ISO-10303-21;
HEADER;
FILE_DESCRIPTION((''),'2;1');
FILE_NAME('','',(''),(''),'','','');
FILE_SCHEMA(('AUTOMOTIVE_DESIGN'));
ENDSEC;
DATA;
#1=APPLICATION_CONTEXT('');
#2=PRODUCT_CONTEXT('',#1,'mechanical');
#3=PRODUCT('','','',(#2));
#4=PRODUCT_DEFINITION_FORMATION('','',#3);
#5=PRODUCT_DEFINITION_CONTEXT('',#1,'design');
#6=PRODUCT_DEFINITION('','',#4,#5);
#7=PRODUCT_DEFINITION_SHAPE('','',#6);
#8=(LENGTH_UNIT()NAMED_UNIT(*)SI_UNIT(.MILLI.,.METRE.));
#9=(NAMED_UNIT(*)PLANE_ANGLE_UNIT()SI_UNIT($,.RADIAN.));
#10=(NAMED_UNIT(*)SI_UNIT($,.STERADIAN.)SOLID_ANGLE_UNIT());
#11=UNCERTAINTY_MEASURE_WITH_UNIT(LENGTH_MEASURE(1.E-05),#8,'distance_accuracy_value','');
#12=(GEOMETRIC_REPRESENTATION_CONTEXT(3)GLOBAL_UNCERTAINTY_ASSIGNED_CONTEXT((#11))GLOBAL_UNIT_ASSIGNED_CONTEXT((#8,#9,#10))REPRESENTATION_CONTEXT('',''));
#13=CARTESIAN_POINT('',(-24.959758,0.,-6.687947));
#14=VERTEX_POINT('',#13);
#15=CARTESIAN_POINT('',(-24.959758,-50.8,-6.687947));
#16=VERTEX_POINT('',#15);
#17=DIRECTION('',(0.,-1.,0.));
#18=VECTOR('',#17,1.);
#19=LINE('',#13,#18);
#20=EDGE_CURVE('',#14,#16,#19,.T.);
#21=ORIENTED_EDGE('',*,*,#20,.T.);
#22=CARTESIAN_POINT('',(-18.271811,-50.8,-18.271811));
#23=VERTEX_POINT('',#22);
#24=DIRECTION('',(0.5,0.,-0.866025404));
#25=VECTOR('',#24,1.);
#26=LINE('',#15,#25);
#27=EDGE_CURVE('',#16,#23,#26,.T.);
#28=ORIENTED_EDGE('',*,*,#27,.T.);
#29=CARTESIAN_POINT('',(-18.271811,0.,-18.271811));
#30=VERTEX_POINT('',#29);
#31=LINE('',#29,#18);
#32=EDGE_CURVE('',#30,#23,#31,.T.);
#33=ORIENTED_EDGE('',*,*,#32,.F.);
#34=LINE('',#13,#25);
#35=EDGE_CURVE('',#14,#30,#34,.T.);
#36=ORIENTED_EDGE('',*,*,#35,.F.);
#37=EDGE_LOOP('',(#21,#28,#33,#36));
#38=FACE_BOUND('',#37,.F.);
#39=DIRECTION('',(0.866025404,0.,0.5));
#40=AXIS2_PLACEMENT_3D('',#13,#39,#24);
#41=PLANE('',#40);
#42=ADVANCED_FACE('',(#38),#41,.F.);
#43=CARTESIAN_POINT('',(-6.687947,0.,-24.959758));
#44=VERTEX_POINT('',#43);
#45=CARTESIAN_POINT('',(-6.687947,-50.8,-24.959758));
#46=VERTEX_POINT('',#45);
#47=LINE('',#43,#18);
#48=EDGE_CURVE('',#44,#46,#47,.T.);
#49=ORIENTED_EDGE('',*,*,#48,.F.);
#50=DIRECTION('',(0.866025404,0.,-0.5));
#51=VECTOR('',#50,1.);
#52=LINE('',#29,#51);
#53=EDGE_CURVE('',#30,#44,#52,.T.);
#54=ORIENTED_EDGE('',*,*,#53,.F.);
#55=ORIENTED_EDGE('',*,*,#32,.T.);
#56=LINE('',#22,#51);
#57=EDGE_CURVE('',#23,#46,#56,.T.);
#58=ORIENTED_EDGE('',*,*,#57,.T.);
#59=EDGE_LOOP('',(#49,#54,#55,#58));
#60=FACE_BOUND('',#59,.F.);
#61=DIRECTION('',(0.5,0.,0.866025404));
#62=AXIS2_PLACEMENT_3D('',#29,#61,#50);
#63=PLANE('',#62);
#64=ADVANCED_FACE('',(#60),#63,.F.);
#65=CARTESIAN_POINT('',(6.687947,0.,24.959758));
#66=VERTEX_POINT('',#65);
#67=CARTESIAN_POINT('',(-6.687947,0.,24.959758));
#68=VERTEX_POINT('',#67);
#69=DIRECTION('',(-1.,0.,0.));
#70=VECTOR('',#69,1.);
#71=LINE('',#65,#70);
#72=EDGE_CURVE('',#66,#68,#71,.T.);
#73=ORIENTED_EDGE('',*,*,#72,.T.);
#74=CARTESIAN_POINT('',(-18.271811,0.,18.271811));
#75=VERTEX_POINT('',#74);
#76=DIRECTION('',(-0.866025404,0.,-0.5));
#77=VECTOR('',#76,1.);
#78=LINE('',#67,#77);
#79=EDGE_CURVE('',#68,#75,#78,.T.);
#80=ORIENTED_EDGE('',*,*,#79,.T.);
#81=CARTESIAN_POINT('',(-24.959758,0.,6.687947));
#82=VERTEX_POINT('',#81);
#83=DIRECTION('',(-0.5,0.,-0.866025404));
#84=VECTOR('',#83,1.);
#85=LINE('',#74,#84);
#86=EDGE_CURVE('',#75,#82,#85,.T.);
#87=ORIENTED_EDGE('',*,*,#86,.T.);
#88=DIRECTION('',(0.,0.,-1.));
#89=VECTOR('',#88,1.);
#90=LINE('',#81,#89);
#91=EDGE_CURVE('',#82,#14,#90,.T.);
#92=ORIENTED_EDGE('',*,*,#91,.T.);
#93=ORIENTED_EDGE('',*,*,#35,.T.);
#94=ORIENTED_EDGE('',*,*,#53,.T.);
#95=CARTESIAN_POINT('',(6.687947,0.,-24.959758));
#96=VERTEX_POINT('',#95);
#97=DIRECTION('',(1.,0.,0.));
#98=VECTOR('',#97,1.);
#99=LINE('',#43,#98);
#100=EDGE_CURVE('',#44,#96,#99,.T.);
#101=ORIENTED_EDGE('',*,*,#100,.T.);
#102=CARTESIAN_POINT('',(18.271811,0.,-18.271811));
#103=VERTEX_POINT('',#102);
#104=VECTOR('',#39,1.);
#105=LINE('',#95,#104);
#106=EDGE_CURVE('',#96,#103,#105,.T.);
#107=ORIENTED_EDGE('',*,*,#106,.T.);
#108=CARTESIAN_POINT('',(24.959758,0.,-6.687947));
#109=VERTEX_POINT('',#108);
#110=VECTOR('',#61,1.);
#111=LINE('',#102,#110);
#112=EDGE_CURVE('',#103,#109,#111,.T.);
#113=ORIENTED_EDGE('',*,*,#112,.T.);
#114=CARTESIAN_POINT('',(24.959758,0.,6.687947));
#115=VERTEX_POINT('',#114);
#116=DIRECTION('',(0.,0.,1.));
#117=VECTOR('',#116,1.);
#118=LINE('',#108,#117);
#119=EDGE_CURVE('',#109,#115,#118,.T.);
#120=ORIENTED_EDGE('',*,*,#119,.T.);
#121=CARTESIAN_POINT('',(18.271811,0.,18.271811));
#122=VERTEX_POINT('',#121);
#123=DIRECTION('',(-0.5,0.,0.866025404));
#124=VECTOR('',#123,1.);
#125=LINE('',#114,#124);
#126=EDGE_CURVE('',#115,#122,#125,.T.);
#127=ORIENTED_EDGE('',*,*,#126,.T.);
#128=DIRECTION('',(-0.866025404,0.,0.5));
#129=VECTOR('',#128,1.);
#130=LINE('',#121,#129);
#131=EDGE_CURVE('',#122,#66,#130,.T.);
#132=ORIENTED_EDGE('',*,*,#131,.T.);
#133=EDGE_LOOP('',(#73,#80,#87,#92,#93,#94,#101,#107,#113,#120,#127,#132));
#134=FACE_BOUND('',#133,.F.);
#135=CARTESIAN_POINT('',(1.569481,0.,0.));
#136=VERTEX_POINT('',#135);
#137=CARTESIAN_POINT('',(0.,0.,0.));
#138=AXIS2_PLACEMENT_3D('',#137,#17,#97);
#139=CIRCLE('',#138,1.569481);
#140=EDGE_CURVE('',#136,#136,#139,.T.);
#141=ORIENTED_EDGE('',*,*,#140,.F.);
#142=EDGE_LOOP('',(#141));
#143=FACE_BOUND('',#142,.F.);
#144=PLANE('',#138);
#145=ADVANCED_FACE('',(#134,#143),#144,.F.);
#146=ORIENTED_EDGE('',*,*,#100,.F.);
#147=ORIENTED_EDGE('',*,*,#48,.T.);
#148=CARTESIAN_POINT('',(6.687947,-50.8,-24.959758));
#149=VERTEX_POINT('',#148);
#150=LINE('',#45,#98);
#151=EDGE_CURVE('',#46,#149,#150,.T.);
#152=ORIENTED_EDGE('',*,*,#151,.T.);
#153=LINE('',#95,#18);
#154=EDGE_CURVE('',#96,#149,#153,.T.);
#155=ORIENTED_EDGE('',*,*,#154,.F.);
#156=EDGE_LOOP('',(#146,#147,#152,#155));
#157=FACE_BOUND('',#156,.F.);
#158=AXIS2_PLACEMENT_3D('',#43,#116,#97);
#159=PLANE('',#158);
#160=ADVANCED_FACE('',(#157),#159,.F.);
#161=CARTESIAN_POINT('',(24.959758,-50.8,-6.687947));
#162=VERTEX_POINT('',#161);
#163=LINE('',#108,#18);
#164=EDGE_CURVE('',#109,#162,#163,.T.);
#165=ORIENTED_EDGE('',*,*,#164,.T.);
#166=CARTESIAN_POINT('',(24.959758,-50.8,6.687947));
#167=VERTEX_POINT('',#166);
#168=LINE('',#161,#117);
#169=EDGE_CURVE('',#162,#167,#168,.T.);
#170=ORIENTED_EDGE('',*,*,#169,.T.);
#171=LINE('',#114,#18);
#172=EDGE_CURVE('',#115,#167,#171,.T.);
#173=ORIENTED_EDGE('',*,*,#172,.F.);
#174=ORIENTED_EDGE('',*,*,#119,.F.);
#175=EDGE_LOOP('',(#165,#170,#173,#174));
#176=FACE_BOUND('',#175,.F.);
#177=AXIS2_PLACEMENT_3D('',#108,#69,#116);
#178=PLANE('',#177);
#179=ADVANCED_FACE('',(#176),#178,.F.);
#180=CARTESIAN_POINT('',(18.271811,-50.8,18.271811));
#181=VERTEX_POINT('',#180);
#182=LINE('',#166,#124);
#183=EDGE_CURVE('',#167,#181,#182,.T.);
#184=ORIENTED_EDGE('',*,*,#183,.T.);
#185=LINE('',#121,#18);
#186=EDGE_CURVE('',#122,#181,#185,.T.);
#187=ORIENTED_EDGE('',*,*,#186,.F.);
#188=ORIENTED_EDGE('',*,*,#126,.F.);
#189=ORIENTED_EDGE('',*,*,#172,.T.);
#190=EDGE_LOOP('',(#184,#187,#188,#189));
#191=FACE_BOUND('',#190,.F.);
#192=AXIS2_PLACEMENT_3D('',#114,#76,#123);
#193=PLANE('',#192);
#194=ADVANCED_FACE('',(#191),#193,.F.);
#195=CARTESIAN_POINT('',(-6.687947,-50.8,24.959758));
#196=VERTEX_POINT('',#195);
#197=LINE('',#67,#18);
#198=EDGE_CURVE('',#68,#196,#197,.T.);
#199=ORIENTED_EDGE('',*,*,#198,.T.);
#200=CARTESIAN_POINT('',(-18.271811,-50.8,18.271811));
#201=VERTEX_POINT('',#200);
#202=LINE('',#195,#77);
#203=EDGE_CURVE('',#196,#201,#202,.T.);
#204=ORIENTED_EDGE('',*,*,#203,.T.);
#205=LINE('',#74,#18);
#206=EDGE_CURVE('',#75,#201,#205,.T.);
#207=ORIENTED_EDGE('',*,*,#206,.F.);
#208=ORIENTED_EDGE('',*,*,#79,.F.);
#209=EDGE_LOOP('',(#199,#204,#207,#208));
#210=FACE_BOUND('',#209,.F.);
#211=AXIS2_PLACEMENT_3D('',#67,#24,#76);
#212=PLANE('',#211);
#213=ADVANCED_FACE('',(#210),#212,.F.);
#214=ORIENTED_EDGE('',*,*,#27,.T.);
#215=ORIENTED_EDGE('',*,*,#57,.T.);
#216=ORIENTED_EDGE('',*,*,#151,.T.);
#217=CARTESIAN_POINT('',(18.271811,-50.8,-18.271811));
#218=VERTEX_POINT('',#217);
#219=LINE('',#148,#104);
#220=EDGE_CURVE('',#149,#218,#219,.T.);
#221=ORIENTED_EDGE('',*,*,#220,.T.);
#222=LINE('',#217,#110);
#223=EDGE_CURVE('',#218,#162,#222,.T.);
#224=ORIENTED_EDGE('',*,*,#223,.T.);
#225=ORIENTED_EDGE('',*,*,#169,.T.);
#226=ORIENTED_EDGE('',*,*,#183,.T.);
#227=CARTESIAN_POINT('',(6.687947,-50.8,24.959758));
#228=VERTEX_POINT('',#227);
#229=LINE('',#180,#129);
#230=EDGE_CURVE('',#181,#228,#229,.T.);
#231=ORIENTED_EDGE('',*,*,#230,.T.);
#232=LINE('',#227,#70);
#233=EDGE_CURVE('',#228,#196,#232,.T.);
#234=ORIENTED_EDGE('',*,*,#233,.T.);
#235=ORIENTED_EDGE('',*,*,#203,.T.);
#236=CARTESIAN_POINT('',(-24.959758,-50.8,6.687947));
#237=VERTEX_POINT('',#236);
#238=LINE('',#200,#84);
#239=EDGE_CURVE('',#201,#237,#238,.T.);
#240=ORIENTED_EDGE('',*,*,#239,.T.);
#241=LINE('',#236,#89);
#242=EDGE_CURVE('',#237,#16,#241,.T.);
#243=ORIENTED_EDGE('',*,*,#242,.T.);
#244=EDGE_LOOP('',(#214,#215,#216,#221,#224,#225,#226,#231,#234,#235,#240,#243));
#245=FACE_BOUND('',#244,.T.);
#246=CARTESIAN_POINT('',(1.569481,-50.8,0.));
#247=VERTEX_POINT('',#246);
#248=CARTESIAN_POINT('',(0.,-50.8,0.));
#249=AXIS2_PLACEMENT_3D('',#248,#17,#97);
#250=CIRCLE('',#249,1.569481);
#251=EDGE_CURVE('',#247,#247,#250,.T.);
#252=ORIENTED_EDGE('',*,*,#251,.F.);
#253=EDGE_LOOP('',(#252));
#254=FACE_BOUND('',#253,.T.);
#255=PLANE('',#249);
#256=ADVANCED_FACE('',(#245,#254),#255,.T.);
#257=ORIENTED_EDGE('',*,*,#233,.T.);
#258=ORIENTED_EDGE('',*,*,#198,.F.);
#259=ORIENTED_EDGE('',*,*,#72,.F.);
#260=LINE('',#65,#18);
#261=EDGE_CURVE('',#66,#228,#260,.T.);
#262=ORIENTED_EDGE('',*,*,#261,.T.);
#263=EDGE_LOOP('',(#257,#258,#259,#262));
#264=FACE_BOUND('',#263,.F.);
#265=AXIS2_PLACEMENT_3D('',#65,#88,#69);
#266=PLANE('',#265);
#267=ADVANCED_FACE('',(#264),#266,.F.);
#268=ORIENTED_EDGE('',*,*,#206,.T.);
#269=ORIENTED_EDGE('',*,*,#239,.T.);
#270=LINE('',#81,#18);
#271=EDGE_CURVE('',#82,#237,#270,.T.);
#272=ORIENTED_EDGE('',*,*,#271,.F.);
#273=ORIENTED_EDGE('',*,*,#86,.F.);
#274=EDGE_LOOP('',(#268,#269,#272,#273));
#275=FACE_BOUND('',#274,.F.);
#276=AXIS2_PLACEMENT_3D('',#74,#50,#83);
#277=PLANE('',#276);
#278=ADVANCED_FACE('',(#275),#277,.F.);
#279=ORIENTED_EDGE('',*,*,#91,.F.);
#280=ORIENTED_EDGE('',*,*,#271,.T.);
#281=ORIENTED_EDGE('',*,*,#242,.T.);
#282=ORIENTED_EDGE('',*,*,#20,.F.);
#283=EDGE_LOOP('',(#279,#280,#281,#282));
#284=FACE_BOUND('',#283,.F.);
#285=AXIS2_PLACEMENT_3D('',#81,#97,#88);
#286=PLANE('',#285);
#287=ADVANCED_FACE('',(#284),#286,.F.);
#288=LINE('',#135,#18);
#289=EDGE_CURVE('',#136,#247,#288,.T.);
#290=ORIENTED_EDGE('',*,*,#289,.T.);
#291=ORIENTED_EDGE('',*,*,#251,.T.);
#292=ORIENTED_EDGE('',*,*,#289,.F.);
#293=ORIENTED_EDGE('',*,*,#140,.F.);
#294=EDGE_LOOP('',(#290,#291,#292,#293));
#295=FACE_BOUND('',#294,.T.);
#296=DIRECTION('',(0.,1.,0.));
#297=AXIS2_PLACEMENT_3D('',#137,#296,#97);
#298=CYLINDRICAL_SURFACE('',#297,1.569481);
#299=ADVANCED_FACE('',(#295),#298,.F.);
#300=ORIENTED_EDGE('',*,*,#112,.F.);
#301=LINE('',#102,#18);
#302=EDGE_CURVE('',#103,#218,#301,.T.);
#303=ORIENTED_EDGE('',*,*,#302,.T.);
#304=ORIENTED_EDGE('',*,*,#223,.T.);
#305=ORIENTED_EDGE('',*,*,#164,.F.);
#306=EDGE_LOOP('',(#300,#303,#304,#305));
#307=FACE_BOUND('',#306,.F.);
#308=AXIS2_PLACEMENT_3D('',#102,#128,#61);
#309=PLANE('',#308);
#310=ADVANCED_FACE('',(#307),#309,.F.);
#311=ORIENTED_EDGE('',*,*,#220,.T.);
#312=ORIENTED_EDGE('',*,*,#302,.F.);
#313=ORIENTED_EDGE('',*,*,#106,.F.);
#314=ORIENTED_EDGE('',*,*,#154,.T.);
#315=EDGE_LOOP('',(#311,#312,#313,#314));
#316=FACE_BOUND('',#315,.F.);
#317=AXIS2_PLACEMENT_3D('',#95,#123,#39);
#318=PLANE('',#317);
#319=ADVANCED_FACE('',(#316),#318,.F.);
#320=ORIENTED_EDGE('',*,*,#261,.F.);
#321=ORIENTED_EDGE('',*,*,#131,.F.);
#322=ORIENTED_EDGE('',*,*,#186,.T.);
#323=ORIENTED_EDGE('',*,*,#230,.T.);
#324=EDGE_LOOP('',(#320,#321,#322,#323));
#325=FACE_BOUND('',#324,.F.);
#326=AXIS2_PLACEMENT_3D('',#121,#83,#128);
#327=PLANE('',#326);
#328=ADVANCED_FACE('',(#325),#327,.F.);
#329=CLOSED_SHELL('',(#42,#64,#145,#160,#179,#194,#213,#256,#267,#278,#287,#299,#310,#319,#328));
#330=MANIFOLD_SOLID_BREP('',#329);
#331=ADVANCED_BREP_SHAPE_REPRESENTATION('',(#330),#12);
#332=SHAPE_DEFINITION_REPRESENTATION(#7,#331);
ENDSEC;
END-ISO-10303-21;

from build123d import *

# Parameters (mm, degrees)
F0_R     = 1.5694812218
F1_DEPTH = 50.8


# Not quite as in the source:
# - a feature names something its author has since deleted; it is built from what else it names


with BuildPart() as f1:
    # F0 (on Front) → F1 (new body)
    with BuildSketch(Plane.XZ):
        Polygon((6.6879468774, 24.9597575449), (-6.6879468774, 24.9597575449), (-18.2718106675, 18.2718106675), (-24.9597575449, 6.6879468774), (-24.9597575449, -6.6879468774), (-18.2718106675, -18.2718106675), (-6.6879468774, -24.9597575449), (6.6879468774, -24.9597575449), (18.2718106675, -18.2718106675), (24.9597575449, -6.6879468774), (24.9597575449, 6.6879468774), (18.2718106675, 18.2718106675), align=None)
        Circle(F0_R, mode=Mode.SUBTRACT)
    extrude(amount=F1_DEPTH)


solid = f1.part
